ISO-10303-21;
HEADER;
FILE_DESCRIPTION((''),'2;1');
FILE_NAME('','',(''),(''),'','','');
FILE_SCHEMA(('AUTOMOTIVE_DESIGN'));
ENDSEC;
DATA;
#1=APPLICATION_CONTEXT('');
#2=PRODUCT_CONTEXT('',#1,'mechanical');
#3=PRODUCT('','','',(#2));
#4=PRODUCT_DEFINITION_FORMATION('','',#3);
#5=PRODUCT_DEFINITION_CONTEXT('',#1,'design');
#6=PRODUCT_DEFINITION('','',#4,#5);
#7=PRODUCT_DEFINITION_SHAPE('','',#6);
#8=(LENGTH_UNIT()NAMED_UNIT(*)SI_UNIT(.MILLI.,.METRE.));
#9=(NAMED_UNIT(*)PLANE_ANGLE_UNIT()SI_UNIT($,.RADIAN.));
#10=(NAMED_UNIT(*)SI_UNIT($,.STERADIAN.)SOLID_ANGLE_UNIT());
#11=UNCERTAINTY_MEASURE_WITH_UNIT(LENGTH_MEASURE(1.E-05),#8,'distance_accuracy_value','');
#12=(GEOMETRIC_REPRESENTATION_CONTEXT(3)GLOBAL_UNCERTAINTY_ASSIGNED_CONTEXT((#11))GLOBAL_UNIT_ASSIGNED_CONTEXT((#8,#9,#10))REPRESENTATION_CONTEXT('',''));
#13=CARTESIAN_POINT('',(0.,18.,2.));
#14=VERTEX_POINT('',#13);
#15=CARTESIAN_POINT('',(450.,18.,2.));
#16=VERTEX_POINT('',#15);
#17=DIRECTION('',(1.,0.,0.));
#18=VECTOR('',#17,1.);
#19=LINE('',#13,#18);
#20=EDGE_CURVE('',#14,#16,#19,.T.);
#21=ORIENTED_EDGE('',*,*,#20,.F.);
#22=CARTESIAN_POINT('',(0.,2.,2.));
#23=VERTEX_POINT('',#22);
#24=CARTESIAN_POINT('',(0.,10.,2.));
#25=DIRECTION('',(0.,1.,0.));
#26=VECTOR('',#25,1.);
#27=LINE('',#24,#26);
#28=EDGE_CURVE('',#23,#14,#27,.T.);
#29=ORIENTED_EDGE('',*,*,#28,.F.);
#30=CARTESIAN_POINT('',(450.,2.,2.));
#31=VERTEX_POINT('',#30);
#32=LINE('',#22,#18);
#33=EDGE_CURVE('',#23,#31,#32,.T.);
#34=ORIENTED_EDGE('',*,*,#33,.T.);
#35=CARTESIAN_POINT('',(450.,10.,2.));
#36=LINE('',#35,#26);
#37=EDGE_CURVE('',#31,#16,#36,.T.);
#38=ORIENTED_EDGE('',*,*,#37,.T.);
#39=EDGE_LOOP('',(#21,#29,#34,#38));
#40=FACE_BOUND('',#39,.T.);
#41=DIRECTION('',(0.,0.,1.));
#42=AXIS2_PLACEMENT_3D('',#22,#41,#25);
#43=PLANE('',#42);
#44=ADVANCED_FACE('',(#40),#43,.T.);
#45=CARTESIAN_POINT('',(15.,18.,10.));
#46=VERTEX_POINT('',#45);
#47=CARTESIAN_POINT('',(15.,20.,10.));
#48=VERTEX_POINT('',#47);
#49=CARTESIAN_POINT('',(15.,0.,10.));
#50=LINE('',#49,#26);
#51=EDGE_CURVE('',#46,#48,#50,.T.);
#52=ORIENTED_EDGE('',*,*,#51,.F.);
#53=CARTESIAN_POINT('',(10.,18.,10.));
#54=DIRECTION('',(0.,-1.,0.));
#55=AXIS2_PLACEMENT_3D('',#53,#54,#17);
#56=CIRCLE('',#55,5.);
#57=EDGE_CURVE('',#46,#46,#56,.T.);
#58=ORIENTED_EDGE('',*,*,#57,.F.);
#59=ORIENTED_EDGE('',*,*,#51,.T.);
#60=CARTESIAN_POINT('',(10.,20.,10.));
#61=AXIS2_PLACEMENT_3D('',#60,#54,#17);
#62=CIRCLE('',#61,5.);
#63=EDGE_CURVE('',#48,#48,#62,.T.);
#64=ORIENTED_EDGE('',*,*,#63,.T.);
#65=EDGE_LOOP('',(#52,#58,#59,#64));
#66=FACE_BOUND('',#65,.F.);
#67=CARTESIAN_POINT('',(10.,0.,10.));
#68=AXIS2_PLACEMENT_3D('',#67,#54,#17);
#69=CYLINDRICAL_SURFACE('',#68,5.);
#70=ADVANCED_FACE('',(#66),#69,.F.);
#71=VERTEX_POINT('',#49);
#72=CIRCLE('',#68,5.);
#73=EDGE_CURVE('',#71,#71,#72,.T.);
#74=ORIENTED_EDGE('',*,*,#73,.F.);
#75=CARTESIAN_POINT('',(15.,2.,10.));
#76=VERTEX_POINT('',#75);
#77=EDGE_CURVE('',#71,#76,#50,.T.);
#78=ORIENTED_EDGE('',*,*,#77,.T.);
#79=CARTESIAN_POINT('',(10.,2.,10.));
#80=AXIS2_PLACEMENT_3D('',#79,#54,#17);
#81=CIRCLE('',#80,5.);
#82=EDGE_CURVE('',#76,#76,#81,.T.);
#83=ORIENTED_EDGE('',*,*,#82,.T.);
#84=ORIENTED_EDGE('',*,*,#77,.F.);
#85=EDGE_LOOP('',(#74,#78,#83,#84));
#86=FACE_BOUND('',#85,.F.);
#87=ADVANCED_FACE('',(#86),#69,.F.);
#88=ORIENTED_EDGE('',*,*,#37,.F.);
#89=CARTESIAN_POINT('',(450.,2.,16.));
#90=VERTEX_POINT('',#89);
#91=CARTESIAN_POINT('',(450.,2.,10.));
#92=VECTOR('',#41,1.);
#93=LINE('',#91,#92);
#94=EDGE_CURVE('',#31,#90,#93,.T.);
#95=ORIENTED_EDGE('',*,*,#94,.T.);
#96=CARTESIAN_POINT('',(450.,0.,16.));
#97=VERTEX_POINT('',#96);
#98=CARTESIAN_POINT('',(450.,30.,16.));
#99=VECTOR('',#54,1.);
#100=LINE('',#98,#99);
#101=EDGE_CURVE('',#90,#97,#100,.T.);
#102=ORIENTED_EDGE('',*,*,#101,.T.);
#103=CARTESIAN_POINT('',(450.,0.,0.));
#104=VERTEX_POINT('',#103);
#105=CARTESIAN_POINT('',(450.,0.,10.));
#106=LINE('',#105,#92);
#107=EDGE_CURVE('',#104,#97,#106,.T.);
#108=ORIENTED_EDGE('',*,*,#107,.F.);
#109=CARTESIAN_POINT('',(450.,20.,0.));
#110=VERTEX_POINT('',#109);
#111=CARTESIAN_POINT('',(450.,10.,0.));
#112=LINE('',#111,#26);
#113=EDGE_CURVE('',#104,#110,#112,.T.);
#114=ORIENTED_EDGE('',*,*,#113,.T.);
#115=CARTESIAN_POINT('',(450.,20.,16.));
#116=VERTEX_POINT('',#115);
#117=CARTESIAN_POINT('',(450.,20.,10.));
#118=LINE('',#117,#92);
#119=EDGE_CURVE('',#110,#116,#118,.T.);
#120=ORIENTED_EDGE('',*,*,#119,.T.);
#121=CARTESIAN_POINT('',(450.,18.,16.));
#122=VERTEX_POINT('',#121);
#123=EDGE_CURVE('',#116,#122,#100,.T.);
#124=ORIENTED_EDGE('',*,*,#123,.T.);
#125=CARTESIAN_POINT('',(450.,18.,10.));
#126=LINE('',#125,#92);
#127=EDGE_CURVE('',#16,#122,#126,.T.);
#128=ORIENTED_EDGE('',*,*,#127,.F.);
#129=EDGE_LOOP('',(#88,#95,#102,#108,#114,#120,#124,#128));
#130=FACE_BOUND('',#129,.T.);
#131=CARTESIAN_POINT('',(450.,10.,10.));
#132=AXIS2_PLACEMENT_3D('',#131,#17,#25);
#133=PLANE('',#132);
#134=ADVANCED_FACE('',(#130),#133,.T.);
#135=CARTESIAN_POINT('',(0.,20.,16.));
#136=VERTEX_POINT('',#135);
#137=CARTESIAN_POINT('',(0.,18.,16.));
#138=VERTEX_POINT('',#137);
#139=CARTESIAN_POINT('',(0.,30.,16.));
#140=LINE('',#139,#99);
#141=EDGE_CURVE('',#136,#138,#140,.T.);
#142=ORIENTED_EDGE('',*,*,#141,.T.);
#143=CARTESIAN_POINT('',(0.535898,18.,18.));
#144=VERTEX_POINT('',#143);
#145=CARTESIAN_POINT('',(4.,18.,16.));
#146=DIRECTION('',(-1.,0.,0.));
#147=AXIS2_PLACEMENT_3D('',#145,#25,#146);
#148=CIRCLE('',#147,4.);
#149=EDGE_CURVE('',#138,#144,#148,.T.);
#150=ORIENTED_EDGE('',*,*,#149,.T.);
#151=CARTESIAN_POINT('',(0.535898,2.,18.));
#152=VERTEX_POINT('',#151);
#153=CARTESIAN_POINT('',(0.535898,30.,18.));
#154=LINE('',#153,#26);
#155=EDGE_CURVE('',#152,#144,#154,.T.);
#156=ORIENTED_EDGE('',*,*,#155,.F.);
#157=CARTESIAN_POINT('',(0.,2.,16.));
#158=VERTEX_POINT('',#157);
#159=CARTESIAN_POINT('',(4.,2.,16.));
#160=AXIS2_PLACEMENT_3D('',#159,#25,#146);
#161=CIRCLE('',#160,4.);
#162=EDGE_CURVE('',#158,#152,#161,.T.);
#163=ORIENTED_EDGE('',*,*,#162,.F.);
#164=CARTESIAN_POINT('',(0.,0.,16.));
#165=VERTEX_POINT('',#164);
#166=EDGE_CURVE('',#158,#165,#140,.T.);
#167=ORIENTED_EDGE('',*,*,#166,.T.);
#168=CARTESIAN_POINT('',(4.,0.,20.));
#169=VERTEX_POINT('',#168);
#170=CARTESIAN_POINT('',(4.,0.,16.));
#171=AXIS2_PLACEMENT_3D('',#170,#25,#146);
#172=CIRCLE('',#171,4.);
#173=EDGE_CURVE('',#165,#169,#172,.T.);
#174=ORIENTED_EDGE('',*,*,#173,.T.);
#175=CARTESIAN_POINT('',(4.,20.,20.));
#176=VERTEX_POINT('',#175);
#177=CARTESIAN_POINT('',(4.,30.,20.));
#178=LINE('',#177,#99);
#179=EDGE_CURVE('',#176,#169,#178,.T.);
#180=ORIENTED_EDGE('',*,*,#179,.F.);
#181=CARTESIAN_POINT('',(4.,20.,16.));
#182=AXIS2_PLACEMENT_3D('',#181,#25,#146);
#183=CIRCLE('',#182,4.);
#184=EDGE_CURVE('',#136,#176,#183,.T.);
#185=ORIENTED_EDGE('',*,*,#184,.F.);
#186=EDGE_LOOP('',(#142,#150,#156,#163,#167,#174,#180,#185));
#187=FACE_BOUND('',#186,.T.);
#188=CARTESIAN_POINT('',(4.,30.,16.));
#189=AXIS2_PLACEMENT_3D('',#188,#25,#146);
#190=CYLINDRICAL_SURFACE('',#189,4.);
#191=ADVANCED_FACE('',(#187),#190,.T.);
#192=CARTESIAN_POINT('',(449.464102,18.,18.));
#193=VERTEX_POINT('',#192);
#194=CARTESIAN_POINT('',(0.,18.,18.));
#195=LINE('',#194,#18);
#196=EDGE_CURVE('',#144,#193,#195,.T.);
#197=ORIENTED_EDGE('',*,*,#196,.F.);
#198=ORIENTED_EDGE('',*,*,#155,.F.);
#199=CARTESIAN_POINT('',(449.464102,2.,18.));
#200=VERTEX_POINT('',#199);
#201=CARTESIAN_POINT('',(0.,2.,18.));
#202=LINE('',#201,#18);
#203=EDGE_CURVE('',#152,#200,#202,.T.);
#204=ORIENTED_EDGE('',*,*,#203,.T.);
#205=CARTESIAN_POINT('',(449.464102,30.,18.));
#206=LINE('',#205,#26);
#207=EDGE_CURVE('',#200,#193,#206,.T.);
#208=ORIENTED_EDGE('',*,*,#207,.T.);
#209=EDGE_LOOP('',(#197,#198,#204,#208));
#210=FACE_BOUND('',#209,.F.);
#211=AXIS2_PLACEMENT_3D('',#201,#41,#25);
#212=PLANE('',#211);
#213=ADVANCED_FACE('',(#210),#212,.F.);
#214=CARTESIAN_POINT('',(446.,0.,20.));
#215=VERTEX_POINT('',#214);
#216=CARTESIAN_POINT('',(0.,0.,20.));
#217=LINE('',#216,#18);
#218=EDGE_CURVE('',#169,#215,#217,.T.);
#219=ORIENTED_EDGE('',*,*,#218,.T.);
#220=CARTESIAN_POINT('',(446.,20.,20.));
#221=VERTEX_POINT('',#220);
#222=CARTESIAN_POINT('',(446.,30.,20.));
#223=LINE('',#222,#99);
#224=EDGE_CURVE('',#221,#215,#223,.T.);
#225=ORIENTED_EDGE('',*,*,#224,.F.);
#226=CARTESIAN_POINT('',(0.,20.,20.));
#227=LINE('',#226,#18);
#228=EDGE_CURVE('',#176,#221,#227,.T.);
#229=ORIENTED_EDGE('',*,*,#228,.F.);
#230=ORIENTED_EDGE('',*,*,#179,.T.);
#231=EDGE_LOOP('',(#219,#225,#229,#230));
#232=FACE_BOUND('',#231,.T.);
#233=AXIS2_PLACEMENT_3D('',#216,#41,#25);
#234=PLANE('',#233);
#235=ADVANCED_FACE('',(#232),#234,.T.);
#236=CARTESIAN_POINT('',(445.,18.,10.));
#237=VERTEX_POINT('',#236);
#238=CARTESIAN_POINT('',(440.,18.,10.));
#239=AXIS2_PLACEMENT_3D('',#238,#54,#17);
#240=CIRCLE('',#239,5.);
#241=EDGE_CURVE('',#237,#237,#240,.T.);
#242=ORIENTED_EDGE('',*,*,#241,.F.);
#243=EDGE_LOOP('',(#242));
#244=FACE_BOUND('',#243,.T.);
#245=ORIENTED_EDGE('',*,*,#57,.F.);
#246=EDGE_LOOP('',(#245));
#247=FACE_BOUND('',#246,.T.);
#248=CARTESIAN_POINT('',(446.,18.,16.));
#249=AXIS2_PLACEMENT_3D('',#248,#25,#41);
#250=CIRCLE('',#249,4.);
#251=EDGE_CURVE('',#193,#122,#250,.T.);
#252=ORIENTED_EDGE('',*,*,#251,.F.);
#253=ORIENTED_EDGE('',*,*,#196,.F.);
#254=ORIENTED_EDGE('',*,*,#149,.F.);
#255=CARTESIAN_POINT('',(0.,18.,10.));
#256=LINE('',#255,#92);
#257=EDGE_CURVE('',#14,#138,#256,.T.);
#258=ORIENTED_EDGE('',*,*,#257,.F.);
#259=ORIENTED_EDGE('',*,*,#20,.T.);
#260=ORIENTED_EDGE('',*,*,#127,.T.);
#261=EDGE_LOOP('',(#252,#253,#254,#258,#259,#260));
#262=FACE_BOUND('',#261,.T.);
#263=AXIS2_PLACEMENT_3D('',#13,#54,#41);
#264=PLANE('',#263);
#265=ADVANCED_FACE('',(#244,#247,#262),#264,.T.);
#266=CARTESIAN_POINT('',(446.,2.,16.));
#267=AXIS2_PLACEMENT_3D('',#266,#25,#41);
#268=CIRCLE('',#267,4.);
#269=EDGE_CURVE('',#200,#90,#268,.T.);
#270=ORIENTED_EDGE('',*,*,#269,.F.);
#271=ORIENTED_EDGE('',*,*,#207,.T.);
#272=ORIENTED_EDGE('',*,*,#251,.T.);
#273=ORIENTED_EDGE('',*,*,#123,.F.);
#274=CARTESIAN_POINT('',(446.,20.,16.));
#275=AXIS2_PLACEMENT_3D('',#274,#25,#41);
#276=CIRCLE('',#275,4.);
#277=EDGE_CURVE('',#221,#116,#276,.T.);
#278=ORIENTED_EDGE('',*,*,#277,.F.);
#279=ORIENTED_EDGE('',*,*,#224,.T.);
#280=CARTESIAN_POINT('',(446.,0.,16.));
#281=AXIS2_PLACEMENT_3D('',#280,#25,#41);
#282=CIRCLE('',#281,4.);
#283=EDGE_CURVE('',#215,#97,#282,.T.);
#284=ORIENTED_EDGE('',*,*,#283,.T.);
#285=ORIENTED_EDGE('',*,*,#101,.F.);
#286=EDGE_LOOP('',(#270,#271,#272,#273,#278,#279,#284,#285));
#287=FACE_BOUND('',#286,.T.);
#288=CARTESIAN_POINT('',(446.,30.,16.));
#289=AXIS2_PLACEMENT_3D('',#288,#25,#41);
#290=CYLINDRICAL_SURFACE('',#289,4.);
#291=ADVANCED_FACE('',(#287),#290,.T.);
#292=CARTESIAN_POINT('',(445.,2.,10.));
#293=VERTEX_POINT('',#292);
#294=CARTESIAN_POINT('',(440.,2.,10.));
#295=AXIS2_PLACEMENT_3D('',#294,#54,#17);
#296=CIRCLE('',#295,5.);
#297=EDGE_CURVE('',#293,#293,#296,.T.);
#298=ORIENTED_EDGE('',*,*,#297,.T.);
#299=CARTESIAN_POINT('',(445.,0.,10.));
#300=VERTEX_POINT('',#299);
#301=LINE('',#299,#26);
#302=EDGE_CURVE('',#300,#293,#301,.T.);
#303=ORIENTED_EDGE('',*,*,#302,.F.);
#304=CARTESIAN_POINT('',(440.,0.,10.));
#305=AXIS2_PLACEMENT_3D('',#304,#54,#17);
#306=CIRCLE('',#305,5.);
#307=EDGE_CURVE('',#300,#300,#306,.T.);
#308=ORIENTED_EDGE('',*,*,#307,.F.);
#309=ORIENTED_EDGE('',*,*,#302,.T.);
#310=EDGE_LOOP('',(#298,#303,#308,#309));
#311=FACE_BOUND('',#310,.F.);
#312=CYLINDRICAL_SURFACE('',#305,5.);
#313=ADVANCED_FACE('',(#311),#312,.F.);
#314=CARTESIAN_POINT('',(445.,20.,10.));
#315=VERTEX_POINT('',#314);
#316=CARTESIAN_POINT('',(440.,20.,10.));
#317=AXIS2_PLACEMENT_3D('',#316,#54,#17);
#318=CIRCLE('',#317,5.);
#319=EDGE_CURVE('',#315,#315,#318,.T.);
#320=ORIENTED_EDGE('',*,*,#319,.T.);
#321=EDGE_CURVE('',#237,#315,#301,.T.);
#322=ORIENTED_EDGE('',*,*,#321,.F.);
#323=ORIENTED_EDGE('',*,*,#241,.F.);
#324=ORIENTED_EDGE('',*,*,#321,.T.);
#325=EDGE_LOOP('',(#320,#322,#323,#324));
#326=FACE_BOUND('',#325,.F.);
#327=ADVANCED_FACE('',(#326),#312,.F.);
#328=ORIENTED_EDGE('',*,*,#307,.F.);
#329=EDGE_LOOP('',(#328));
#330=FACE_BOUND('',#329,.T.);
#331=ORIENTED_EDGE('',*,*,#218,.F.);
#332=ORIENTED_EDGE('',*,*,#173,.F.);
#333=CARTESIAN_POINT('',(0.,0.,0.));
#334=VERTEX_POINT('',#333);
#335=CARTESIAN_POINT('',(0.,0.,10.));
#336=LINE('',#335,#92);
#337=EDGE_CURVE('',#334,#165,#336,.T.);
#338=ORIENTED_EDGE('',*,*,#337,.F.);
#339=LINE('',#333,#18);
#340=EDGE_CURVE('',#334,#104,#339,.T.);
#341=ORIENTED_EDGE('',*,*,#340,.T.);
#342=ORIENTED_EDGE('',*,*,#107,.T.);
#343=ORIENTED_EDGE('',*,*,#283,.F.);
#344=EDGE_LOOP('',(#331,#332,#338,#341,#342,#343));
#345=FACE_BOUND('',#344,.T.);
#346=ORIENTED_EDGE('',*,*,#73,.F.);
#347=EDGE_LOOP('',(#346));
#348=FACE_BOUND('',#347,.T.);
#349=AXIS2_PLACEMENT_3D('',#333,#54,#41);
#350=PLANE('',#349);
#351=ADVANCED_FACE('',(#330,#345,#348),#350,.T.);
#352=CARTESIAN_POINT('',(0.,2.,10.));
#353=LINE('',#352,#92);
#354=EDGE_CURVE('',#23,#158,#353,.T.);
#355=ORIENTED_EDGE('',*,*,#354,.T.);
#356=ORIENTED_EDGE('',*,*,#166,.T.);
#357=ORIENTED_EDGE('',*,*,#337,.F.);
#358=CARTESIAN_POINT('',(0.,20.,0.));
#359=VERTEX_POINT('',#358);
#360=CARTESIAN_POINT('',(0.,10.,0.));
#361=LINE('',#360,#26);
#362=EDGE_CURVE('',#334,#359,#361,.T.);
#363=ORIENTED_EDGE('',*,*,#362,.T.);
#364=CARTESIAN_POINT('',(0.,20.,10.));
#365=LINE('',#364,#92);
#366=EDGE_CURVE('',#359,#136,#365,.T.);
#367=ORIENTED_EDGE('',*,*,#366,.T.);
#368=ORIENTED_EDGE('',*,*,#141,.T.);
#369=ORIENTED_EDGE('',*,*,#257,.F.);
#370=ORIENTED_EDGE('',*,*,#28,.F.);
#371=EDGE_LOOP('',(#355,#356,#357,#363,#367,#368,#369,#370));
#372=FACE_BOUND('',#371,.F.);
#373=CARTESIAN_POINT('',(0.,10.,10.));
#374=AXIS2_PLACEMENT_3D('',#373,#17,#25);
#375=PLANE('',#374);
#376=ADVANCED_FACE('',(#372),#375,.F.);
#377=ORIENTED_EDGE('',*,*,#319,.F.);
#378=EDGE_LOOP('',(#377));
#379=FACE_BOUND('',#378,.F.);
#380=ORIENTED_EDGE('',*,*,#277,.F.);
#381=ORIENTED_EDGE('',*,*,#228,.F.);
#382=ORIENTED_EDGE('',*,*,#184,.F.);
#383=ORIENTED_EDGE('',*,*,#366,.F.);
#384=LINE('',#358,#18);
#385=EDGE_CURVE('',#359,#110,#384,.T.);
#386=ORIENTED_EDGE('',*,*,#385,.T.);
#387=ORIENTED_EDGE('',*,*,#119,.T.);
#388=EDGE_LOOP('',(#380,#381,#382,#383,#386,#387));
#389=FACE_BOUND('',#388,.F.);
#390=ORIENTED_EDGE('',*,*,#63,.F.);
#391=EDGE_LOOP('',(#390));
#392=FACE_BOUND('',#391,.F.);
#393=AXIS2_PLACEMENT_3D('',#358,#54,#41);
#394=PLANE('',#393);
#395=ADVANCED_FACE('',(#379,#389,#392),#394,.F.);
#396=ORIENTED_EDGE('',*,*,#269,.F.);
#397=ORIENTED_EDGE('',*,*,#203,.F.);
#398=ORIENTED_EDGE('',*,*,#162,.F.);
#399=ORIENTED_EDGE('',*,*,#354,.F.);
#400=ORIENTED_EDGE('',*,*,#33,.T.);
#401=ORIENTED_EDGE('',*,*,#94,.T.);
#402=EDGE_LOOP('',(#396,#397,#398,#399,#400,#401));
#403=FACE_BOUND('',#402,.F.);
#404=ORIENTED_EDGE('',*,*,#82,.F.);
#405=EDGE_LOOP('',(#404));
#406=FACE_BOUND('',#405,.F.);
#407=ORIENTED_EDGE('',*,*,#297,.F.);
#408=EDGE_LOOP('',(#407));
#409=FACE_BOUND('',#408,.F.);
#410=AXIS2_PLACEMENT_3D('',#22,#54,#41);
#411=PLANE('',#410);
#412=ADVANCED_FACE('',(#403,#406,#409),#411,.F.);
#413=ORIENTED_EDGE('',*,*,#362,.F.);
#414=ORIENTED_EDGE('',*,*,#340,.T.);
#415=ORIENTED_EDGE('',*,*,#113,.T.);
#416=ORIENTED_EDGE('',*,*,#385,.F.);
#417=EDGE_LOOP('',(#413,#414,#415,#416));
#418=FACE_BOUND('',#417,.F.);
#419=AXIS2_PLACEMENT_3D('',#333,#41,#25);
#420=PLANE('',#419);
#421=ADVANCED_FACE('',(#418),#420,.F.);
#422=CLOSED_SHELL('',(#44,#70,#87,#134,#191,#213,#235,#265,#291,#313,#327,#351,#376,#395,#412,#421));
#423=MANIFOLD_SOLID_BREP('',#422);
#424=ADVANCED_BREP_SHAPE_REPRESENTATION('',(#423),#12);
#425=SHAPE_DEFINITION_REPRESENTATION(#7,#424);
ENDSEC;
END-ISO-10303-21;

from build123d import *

# Parameters (mm, degrees)
F0_W        = 20
F0_H        = 20
F0_W_2      = 16
F0_H_2      = 16
F1_DEPTH    = 450
F2_R        = 5
F3_DEPTH    = 20.001
F4_R        = 5
F5_DEPTH    = 20.001
F6_T1_DEPTH = 40
F7_T1_DEPTH = 40


# Not quite as in the source:
# - a fillet or chamfer that OpenCascade refuses, or shapes differently, is made with other operations: its cross-section is extruded or revolved along the edge and cut away or added


with BuildPart() as f1:
    # F0 (on Right) → F1 (new body)
    with BuildSketch(Plane.YZ):
        with Locations((10, 10)):
            Rectangle(F0_W, F0_H)
        with Locations((10, 10)):
            Rectangle(F0_W_2, F0_H_2, mode=Mode.SUBTRACT)
    extrude(amount=F1_DEPTH)

    # F2 (on face) → F3 (cut, through all)
    with BuildSketch(Plane.XZ):
        with Locations((440, 10)):
            Circle(F2_R)
    extrude(amount=-F3_DEPTH, mode=Mode.SUBTRACT)

    # F4 (on face) → F5 (cut, through all)
    with BuildSketch(Plane.XZ):
        with Locations((10, 10)):
            Circle(F4_R)
    extrude(amount=-F5_DEPTH, mode=Mode.SUBTRACT)

    # F6: fillet of radius 4 on 1 edges, made by hand

    # F6_s2 → F6_t1 (cut)
    with BuildSketch(Plane.XZ.offset(-30)):
        with BuildLine():
            ThreePointArc((446, 20), (448.8284271247, 18.8284271247), (450, 16))
            Line((450, 16), (450, 20))
            Line((450, 20), (446, 20))
        make_face()
    extrude(amount=F6_T1_DEPTH, mode=Mode.SUBTRACT)

    # F7: fillet of radius 4 on 1 edges, made by hand

    # F7_s2 → F7_t1 (cut)
    with BuildSketch(Plane.XZ.offset(-30)):
        with BuildLine():
            ThreePointArc((0, 16), (1.1715728753, 18.8284271247), (4, 20))
            Line((4, 20), (0, 20))
            Line((0, 20), (0, 16))
        make_face()
    extrude(amount=F7_T1_DEPTH, mode=Mode.SUBTRACT)


solid = f1.part
